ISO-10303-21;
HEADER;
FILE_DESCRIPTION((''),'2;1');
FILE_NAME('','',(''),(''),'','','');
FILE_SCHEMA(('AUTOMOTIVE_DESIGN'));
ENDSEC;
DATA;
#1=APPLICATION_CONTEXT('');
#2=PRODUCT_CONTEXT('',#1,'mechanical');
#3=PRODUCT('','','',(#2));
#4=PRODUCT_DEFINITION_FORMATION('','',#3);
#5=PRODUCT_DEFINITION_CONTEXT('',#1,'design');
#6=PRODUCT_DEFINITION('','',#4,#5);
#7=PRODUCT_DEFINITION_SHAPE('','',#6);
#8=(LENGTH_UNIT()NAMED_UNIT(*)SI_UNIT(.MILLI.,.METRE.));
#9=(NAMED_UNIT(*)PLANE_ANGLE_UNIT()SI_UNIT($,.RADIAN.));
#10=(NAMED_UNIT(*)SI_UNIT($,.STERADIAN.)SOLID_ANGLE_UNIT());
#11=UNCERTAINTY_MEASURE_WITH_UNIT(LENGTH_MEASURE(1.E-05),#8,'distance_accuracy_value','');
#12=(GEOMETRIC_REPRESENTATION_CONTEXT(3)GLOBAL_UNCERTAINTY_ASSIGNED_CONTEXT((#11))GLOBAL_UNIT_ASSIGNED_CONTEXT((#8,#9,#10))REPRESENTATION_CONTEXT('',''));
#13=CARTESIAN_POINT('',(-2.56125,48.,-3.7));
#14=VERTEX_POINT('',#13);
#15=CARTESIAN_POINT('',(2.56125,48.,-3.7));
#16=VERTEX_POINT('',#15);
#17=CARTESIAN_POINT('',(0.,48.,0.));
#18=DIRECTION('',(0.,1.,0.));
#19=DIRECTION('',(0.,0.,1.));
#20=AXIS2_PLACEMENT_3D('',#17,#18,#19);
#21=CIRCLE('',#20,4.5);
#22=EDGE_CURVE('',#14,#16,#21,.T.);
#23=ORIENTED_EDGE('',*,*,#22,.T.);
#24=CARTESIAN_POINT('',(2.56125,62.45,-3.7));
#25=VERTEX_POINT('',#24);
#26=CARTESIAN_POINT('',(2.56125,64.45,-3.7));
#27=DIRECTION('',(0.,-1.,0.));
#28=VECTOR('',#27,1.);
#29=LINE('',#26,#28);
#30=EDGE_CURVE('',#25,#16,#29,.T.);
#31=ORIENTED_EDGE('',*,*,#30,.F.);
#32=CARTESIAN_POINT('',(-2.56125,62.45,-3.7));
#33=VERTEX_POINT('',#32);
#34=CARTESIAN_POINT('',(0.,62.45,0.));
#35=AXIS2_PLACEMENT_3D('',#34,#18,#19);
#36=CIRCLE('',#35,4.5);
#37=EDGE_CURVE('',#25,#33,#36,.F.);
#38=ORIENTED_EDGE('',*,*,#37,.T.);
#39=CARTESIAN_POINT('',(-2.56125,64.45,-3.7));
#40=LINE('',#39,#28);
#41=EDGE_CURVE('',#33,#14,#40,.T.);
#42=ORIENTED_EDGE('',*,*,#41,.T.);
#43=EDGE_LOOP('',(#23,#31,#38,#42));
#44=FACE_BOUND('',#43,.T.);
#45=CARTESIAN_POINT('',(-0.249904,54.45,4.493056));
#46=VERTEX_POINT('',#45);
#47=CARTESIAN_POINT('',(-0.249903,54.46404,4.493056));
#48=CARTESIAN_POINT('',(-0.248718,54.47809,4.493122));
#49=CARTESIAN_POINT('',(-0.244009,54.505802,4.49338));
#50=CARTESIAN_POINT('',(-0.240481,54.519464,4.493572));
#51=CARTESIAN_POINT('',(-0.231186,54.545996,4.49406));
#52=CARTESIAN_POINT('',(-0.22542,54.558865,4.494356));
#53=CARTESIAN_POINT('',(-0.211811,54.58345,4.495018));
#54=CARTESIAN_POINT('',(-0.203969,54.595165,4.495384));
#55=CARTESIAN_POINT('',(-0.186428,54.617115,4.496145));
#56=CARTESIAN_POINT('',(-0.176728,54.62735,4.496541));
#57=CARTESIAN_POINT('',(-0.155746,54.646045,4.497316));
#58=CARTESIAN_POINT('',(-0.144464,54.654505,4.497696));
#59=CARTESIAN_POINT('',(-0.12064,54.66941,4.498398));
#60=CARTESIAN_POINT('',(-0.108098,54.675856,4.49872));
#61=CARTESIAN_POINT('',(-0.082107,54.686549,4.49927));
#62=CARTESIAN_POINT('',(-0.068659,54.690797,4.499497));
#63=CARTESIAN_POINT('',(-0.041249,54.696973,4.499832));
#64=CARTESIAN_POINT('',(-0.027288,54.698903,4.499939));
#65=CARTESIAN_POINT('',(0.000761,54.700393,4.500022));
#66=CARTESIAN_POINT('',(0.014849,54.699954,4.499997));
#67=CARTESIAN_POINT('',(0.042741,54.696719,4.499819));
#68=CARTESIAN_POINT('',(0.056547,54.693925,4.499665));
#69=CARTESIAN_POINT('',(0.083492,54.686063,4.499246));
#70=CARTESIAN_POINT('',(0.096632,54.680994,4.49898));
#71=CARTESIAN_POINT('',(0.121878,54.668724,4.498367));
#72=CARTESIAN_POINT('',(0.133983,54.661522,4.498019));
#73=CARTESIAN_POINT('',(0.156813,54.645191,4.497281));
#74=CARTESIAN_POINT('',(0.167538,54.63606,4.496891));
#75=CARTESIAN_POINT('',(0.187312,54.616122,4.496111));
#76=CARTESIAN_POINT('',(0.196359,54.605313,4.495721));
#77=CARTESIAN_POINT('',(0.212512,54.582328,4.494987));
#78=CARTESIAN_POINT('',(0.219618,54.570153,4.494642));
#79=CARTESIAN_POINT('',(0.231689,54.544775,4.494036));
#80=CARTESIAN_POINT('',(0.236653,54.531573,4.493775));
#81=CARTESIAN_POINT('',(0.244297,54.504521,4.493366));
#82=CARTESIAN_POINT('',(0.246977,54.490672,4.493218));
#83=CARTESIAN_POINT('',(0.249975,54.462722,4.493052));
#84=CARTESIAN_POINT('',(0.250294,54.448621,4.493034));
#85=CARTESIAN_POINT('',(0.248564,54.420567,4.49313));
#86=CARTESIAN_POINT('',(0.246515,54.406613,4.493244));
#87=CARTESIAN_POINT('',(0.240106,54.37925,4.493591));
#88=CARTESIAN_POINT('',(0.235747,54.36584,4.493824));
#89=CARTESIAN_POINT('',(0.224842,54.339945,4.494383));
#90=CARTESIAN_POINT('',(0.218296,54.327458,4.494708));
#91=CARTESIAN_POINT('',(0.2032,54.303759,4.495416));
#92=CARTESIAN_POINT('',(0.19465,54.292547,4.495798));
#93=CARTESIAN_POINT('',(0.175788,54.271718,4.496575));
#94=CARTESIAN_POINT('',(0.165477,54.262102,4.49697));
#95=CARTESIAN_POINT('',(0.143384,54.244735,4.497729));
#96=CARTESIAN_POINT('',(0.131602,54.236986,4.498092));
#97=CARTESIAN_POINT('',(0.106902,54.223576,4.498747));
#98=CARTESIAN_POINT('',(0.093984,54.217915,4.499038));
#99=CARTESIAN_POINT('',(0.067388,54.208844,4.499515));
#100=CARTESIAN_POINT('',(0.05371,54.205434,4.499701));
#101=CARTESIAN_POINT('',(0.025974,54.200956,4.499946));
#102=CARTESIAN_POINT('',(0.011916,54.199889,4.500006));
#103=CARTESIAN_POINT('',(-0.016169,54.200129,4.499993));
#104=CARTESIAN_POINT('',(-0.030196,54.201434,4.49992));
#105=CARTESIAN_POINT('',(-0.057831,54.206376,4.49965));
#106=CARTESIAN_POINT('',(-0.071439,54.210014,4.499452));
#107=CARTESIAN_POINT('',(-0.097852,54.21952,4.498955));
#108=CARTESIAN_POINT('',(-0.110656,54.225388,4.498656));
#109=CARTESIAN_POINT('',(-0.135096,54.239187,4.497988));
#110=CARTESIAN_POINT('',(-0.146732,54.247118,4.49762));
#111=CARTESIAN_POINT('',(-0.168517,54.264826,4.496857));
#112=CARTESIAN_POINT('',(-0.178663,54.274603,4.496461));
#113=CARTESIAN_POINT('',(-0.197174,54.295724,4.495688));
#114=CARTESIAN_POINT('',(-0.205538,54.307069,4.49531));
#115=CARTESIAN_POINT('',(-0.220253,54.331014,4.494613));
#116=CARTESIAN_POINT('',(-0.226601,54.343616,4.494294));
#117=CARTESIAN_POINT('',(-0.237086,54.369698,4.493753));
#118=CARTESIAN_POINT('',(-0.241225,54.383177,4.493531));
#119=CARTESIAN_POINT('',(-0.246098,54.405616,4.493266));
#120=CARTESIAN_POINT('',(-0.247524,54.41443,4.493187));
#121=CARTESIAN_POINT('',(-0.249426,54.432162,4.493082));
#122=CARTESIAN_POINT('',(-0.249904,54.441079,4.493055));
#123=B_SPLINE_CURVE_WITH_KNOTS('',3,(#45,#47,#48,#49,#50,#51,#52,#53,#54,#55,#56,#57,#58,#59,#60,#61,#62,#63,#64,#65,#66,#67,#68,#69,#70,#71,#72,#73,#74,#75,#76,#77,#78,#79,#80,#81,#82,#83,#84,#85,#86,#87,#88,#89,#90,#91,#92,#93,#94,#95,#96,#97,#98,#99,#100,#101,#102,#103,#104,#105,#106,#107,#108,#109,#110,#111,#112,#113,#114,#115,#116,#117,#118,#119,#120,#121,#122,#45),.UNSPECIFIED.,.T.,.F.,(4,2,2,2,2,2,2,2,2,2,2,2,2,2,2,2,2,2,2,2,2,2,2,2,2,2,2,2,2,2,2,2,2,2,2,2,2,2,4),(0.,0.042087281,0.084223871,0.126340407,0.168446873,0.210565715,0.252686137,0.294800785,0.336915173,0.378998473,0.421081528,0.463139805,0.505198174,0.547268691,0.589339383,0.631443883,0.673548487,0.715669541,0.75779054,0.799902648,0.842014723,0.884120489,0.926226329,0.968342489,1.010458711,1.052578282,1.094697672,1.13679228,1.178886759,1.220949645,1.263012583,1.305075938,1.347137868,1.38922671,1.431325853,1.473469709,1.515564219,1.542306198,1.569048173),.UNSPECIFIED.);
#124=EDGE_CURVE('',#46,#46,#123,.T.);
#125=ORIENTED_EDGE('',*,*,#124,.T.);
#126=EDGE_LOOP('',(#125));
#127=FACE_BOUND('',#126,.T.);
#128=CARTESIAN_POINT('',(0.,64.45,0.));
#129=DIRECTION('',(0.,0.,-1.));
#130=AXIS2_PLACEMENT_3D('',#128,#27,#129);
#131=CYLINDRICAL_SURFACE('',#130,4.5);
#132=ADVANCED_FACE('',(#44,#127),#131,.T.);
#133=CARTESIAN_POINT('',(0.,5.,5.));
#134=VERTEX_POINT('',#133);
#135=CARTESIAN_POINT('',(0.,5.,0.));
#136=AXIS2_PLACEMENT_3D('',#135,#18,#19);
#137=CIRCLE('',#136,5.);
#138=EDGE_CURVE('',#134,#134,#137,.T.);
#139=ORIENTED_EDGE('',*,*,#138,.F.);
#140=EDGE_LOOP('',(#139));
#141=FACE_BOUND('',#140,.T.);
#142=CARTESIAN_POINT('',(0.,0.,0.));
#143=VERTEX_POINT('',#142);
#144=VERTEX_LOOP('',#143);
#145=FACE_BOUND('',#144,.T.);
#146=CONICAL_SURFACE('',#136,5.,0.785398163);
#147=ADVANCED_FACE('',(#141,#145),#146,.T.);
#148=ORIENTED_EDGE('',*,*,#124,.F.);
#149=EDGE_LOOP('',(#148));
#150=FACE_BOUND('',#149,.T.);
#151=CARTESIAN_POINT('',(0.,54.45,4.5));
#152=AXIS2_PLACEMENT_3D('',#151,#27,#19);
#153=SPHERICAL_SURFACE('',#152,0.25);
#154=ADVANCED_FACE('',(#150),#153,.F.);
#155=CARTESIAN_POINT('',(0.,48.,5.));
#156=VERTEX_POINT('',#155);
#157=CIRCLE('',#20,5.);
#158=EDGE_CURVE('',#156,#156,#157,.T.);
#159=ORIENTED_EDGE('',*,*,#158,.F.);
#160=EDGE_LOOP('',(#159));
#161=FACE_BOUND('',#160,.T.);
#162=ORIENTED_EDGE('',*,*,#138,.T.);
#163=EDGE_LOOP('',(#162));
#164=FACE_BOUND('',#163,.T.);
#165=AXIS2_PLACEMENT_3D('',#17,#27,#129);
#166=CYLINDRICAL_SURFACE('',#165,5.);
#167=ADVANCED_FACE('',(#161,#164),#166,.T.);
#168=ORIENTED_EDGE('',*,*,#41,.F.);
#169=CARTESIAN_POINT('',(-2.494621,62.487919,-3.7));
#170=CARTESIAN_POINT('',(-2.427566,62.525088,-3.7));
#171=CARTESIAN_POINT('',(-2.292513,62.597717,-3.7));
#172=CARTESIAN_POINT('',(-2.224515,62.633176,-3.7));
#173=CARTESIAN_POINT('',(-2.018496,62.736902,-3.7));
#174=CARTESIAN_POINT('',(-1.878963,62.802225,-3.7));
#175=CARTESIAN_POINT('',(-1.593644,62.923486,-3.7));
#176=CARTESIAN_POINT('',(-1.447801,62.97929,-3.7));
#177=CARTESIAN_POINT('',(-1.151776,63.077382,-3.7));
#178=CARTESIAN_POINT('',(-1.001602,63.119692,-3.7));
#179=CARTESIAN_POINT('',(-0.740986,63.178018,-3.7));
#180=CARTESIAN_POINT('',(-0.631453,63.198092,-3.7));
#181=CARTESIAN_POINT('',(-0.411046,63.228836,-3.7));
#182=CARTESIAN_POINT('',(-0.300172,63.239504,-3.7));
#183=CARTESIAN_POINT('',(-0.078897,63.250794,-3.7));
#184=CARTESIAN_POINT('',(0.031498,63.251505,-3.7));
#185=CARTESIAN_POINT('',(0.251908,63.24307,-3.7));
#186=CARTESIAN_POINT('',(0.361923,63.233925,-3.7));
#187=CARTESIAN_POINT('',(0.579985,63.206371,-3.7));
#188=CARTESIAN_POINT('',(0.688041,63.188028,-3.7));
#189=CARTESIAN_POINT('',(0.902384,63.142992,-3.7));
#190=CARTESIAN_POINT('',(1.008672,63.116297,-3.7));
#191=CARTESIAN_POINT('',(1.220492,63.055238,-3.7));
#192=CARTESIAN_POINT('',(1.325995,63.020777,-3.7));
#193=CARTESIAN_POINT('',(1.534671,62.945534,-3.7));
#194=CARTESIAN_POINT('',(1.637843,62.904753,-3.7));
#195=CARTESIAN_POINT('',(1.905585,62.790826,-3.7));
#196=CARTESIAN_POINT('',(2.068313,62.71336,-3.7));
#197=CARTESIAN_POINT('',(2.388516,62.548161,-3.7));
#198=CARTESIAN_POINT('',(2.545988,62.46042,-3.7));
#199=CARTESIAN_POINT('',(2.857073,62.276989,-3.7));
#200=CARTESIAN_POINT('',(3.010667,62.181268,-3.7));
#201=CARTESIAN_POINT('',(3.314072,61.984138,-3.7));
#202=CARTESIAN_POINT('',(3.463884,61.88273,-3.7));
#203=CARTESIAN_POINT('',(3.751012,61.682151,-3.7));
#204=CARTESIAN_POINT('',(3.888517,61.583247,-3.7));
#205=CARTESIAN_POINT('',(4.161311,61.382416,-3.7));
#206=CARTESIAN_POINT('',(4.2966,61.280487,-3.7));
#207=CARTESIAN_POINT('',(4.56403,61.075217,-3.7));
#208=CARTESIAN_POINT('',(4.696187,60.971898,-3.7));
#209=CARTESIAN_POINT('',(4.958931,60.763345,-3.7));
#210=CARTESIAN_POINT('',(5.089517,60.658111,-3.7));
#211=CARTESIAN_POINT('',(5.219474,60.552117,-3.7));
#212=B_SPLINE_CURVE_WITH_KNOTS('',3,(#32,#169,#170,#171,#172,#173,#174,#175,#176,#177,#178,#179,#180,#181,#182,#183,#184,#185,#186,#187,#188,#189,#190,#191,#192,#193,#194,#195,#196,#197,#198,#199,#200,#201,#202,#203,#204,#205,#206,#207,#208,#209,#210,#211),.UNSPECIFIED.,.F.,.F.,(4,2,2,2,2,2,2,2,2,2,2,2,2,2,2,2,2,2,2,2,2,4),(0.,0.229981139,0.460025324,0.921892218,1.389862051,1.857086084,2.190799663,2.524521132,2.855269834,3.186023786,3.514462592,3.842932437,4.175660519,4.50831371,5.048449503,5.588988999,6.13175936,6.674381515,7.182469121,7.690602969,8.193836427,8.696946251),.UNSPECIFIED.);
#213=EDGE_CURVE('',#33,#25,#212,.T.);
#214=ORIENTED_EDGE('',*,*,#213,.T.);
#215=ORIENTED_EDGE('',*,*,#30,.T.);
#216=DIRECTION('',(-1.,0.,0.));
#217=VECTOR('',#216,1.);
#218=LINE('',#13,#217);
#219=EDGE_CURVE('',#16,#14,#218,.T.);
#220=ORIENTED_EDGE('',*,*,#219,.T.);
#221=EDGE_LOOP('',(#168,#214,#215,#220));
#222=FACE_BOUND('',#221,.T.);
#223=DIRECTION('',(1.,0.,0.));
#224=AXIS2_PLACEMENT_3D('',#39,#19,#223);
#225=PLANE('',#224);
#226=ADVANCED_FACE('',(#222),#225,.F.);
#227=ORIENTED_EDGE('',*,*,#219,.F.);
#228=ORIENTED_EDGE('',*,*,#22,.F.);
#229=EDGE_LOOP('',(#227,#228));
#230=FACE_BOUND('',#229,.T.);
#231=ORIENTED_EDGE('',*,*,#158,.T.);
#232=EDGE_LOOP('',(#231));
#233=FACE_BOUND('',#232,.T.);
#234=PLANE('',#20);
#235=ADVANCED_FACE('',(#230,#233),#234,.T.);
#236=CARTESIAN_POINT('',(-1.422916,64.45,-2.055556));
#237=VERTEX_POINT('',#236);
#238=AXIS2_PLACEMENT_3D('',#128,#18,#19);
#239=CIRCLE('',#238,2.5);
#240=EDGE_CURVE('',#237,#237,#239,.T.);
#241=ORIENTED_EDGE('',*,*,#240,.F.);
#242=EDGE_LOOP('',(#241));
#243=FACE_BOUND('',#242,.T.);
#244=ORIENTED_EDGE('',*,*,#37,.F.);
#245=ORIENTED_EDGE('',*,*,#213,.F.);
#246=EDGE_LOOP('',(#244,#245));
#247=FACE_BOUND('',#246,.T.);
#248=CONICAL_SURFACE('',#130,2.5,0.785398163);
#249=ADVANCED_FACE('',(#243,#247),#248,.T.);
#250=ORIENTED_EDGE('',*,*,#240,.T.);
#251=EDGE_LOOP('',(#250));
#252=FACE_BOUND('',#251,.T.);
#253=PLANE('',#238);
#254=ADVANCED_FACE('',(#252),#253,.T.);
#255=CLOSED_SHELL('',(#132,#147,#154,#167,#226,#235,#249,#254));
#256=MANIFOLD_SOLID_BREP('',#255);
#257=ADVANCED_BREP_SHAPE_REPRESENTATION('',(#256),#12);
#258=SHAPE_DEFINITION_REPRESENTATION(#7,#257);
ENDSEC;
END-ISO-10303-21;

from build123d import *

# Parameters (mm, degrees)
SKETCH1_R           = 5
BOSS_EXTRUDE1_DEPTH = 48
CHAMFER1_SIZE       = 5
BOSS_EXTRUDE2_DEPTH = 16.45


with BuildPart() as part:
    # Sketch1 → Boss-Extrude1 (new body)
    with BuildSketch(Plane(origin=(0, 0, 0), x_dir=(1, 0, 0), z_dir=(0, 1, 0))):
        with Locations(Location((0, 0, 0), (0, 0, 270))):
            Circle(SKETCH1_R)
    extrude(amount=BOSS_EXTRUDE1_DEPTH)

    # Chamfer1
    chamfer1_edges = [part.edges().sort_by_distance(p)[0] for p in [
        (0, 0, -5),
    ]]
    chamfer(chamfer1_edges, length=CHAMFER1_SIZE)

    # Sketch2 → Boss-Extrude2 (add)
    with BuildSketch(Plane(origin=(0, 48, 0), x_dir=(1, 0, 0), z_dir=(0, 1, 0))):
        with BuildLine():
            Line((-2.561249695, 3.7), (2.561249695, 3.7))
            ThreePointArc((2.561249695, 3.7), (0, -4.5), (-2.561249695, 3.7))
        make_face()
    extrude(amount=BOSS_EXTRUDE2_DEPTH)

    # Chamfer2: read off the stored shape, not the designer's step
    # Chamfer2 outline → Chamfer2 (revolve, cut)
    with BuildSketch(Plane.XY):
        Polygon((4.5, 64.45), (2.5, 64.45), (4.5, 62.45), align=None)
    revolve(axis=Axis((0, 0, 0), (0, 1, 0)), mode=Mode.SUBTRACT)

    # Sketch3 → Cut-Revolve1 (revolve, cut)
    with BuildSketch(Plane(origin=(0, 0, 0), x_dir=(0, 0, -1), z_dir=(1, 0, 0))):
        with BuildLine():
            Line((-4.5, 54.2), (-4.5, 54.7))
            ThreePointArc((-4.5, 54.7), (-4.25, 54.45), (-4.5, 54.2))
        make_face()
    revolve(axis=Axis((0, 54.2, 4.5), (0, 1, 0)), mode=Mode.SUBTRACT)


solid = part.part
